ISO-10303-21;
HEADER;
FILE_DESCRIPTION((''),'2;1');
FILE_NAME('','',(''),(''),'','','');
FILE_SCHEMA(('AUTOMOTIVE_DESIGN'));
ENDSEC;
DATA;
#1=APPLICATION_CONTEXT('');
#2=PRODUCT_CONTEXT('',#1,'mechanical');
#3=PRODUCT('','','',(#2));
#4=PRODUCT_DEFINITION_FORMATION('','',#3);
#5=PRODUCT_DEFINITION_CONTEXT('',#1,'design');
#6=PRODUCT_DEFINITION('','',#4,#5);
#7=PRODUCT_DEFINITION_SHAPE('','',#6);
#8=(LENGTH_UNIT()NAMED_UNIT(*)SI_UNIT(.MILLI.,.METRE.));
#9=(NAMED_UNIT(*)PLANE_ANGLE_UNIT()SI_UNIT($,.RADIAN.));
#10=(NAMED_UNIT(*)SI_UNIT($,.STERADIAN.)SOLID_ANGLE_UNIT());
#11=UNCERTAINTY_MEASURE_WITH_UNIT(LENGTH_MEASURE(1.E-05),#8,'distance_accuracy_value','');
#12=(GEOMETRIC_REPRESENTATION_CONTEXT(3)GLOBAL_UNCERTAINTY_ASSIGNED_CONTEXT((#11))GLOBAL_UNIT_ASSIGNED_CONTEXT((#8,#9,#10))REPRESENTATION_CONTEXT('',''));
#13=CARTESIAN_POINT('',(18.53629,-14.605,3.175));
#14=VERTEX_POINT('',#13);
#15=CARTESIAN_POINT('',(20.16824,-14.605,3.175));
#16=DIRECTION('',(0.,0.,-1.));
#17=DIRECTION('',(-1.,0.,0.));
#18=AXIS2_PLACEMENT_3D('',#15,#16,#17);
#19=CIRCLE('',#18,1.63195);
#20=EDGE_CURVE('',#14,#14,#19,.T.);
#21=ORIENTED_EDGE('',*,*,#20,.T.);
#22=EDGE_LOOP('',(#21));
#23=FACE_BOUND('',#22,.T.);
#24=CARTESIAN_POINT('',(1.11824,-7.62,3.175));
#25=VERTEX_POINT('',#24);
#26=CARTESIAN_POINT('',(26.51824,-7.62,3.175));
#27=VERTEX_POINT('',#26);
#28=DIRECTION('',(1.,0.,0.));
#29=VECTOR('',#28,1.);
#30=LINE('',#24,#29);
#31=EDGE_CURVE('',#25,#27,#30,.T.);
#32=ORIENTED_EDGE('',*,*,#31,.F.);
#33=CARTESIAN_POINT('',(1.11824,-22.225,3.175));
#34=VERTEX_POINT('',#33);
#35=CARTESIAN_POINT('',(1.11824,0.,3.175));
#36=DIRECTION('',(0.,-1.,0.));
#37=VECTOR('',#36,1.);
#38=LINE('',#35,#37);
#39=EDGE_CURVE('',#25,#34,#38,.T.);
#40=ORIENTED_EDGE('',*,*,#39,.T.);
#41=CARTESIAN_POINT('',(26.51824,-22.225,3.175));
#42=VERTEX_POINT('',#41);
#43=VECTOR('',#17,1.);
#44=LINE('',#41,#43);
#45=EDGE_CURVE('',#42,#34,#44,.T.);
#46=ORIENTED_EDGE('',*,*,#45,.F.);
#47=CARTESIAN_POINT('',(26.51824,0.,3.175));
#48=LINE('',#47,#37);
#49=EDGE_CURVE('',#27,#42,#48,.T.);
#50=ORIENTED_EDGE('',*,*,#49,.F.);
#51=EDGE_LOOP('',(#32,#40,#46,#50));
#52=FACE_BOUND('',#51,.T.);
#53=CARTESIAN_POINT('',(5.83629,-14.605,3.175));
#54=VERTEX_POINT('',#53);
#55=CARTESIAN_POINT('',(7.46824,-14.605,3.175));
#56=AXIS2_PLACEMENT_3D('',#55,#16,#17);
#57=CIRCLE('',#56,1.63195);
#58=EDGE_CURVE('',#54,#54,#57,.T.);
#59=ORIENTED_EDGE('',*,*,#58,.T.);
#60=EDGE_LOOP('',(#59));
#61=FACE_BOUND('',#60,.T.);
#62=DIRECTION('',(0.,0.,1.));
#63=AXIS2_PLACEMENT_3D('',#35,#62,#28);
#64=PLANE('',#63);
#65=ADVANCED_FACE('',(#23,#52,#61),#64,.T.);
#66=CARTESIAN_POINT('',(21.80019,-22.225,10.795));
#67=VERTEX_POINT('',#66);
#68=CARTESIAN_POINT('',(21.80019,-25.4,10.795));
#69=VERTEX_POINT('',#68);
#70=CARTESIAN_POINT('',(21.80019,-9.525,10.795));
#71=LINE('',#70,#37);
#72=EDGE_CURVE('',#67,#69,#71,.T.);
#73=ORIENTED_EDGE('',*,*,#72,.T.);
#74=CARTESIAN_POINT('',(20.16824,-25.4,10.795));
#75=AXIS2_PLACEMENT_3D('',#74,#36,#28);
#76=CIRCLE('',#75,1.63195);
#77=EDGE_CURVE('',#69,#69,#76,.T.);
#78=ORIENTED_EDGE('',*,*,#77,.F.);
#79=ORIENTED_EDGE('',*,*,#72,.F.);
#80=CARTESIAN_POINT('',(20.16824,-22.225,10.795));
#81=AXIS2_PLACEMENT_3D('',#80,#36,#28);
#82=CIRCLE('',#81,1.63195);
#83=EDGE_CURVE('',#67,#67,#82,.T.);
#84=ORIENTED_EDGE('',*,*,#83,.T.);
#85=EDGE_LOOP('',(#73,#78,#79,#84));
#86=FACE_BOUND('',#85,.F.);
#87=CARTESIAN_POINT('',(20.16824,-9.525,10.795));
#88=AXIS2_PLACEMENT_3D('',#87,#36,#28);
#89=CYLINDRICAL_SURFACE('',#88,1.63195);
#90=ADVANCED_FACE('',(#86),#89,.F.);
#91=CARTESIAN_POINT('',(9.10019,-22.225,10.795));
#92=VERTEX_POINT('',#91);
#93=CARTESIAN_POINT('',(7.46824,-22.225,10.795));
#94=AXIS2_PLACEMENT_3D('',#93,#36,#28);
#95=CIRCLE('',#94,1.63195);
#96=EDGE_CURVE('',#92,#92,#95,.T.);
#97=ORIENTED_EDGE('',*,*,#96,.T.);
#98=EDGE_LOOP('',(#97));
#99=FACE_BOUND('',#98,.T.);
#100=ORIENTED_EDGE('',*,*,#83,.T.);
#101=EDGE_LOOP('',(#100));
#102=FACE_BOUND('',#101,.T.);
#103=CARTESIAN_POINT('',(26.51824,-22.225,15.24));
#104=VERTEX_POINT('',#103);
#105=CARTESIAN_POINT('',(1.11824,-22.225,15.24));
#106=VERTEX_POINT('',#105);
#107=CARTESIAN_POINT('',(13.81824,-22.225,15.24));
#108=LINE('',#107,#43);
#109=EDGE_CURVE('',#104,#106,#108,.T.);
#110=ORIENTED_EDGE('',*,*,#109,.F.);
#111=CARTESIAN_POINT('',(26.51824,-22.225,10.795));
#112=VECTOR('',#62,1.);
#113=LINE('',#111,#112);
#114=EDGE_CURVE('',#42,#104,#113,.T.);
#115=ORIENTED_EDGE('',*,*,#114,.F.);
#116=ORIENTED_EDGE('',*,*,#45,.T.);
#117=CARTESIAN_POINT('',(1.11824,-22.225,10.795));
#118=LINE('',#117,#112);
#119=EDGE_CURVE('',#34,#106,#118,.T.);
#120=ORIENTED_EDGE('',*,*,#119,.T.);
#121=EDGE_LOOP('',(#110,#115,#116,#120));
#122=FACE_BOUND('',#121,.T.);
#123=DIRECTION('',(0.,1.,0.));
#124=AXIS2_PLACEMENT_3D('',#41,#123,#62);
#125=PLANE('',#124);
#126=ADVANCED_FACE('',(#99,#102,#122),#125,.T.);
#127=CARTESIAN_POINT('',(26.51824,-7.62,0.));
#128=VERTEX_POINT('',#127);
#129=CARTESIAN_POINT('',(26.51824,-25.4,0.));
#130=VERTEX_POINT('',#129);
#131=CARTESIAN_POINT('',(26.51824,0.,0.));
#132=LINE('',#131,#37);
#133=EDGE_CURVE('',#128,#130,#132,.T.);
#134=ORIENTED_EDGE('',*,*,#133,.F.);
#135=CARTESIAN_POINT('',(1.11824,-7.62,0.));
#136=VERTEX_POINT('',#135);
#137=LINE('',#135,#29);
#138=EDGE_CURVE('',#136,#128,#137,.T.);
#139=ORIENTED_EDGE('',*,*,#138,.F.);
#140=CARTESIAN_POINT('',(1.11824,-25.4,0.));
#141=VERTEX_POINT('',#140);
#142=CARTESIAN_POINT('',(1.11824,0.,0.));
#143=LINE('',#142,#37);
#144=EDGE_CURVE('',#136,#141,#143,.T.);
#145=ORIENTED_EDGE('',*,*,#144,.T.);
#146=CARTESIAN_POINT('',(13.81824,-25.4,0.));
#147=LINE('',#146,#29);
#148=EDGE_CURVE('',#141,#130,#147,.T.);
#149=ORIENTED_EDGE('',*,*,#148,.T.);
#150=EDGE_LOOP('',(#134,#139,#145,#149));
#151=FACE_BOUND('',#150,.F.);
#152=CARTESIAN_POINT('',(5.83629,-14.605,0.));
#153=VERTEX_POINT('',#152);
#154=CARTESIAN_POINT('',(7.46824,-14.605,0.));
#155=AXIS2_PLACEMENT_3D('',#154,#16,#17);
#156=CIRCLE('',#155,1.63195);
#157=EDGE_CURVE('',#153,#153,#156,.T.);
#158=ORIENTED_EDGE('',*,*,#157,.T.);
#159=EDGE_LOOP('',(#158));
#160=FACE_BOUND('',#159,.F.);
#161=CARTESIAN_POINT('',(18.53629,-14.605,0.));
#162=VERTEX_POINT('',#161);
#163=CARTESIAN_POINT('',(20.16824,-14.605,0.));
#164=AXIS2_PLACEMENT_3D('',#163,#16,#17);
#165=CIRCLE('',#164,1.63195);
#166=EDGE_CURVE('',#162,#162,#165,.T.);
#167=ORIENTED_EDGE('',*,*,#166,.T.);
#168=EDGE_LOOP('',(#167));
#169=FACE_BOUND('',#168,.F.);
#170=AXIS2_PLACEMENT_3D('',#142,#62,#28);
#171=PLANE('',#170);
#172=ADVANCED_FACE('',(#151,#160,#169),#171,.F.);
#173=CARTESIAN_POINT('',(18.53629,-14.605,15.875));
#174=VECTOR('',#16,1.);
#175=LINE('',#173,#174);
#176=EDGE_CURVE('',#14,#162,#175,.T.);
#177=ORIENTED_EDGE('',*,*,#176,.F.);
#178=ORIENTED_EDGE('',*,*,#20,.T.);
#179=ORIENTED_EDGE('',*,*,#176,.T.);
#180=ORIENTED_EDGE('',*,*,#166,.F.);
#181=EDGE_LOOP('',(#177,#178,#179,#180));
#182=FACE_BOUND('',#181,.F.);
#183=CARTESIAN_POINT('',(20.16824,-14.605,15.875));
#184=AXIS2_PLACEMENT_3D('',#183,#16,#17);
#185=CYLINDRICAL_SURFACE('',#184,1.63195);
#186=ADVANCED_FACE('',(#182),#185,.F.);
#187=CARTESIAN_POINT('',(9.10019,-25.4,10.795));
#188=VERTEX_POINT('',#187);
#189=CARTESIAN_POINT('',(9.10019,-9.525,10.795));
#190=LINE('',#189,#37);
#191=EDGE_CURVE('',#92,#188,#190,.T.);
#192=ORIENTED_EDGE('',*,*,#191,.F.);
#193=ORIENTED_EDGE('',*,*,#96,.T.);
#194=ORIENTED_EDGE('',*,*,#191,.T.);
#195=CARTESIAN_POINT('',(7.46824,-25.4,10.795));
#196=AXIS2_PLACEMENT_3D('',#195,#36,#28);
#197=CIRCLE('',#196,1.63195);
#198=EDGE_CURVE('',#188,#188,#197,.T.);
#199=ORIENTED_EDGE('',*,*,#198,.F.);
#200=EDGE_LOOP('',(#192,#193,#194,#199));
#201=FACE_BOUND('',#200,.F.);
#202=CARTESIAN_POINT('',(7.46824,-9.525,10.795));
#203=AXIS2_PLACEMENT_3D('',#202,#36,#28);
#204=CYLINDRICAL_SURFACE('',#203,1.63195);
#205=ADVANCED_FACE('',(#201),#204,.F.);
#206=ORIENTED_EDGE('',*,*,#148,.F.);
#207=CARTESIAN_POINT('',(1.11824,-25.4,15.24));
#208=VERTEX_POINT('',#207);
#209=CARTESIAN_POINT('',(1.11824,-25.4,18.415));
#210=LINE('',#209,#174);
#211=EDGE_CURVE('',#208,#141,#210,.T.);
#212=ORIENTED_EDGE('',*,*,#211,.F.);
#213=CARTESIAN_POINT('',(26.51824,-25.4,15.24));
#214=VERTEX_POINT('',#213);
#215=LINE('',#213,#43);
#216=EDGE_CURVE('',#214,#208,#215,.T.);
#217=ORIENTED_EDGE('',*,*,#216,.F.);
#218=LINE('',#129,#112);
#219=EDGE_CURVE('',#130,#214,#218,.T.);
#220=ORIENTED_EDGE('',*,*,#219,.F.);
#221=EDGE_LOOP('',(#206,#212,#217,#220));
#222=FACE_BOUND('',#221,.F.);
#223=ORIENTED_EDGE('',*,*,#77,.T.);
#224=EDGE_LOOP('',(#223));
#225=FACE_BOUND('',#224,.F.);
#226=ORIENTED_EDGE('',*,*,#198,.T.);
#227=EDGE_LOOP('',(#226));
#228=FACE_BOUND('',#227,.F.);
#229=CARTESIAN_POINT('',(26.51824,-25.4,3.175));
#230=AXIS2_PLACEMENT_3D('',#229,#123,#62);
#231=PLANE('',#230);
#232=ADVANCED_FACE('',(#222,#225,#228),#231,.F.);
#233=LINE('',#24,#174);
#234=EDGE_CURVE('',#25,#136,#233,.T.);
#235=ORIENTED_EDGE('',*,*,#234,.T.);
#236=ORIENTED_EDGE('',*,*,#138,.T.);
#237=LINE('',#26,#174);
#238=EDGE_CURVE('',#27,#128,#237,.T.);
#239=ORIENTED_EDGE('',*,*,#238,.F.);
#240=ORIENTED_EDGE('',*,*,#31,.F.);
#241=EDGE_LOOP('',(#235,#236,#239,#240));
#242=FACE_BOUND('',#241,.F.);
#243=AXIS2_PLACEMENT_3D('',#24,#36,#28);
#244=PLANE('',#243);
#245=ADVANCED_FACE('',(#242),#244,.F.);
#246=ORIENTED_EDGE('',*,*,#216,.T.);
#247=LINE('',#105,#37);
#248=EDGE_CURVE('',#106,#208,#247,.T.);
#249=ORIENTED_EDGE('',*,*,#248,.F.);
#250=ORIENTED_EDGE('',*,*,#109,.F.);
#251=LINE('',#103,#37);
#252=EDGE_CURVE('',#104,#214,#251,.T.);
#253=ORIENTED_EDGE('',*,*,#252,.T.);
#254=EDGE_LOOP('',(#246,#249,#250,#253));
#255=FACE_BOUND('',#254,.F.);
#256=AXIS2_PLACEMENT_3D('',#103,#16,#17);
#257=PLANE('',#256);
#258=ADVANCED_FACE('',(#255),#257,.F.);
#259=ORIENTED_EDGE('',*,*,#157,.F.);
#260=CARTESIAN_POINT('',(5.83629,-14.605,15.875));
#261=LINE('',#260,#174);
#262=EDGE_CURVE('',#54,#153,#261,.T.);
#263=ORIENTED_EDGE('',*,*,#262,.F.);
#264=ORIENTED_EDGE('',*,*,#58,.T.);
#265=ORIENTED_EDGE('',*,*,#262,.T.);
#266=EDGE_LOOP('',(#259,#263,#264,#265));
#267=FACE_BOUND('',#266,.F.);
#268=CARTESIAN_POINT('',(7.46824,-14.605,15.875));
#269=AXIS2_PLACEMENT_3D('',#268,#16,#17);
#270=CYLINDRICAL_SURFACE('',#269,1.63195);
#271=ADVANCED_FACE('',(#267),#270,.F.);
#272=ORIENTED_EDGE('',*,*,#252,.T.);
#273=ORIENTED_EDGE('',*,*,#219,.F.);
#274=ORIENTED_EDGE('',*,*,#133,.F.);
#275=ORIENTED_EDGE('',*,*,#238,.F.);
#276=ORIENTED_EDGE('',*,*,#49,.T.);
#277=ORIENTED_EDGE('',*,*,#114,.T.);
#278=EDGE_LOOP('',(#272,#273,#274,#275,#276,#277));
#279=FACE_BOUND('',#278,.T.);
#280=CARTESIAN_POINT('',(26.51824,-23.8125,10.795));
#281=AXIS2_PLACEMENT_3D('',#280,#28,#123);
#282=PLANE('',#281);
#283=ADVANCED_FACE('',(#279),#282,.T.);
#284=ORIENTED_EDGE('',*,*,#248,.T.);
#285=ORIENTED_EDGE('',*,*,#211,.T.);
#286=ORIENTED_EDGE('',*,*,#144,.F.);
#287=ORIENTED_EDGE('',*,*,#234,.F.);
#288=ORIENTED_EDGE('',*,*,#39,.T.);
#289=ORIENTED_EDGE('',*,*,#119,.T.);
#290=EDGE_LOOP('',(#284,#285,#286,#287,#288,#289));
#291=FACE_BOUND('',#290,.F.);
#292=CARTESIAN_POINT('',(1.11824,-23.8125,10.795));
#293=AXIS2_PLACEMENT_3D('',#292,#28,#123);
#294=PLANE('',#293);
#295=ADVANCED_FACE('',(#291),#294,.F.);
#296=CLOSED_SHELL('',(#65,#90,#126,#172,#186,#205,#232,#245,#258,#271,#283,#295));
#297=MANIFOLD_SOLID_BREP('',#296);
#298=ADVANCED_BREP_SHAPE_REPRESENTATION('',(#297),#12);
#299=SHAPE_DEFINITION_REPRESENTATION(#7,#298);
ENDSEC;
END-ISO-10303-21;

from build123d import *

# Parameters (mm, degrees)
F0_W      = 25.4
F0_H      = 3.175
F1_DEPTH  = 25.4
F2_W      = 3.175
F2_H      = 15.24
F3_DEPTH  = 25.4
F5_D      = 3.2639
F5_DEPTH  = 12.7
F5_TIP    = 0.9805744872
F7_D      = 3.2639
F7_DEPTH  = 12.7
F7_TIP    = 0.9805744872
F8_W      = 25.4
F8_H      = 3.175
F9_DEPTH  = 3.176
F11_DEPTH = 3.176


with BuildPart() as f1:
    # F0 (on Front) → F1 (new body)
    with BuildSketch(Plane.XZ):
        with Locations((13.8182396877, 1.5875)):
            Rectangle(F0_W, F0_H)
    extrude(amount=F1_DEPTH)

    # F2 (on face) → F3 (join)
    with BuildSketch(Plane.YZ.offset(26.5182396877)):
        with Locations((-23.8125, 10.795)):
            Rectangle(F2_W, F2_H)
    extrude(amount=-F3_DEPTH)

    # F5
    with Locations(Plane(origin=(0, -22.225, 0), x_dir=(-1, 0, 0), z_dir=(0, 1, 0))):
        with Locations((-20.1682396877, 10.795), (-7.4682396877, 10.795)):
            Hole(F5_D / 2, depth=F5_DEPTH)
            with Locations((0, 0, -(F5_DEPTH + F5_TIP / 2))):  # 118° drill point
                Cone(0, F5_D / 2, F5_TIP, mode=Mode.SUBTRACT)

    # F7
    with Locations(Plane.XY.offset(3.175)):
        with Locations((7.4682396877, -14.605), (20.1682396877, -14.605)):
            Hole(F7_D / 2, depth=F7_DEPTH)
            with Locations((0, 0, -(F7_DEPTH + F7_TIP / 2))):  # 118° drill point
                Cone(0, F7_D / 2, F7_TIP, mode=Mode.SUBTRACT)

    # F8 (on face) → F9 (cut, through all)
    with BuildSketch(Plane(origin=(0, -22.225, 0), x_dir=(-1, 0, 0), z_dir=(0, 1, 0))):
        with Locations((-13.8182396877, 16.8275)):
            Rectangle(F8_W, F8_H)
    extrude(amount=-F9_DEPTH, mode=Mode.SUBTRACT)

    # F10 (on face) → F11 (cut, through all)
    with BuildSketch(Plane.XY.offset(3.175)):
        Polygon((13.8182396877, 0), (1.1182396877, 0), (1.1182396877, -7.62), (26.5182396877, -7.62), (26.5182396877, 0), align=None)
    extrude(amount=-F11_DEPTH, mode=Mode.SUBTRACT)


solid = f1.part
